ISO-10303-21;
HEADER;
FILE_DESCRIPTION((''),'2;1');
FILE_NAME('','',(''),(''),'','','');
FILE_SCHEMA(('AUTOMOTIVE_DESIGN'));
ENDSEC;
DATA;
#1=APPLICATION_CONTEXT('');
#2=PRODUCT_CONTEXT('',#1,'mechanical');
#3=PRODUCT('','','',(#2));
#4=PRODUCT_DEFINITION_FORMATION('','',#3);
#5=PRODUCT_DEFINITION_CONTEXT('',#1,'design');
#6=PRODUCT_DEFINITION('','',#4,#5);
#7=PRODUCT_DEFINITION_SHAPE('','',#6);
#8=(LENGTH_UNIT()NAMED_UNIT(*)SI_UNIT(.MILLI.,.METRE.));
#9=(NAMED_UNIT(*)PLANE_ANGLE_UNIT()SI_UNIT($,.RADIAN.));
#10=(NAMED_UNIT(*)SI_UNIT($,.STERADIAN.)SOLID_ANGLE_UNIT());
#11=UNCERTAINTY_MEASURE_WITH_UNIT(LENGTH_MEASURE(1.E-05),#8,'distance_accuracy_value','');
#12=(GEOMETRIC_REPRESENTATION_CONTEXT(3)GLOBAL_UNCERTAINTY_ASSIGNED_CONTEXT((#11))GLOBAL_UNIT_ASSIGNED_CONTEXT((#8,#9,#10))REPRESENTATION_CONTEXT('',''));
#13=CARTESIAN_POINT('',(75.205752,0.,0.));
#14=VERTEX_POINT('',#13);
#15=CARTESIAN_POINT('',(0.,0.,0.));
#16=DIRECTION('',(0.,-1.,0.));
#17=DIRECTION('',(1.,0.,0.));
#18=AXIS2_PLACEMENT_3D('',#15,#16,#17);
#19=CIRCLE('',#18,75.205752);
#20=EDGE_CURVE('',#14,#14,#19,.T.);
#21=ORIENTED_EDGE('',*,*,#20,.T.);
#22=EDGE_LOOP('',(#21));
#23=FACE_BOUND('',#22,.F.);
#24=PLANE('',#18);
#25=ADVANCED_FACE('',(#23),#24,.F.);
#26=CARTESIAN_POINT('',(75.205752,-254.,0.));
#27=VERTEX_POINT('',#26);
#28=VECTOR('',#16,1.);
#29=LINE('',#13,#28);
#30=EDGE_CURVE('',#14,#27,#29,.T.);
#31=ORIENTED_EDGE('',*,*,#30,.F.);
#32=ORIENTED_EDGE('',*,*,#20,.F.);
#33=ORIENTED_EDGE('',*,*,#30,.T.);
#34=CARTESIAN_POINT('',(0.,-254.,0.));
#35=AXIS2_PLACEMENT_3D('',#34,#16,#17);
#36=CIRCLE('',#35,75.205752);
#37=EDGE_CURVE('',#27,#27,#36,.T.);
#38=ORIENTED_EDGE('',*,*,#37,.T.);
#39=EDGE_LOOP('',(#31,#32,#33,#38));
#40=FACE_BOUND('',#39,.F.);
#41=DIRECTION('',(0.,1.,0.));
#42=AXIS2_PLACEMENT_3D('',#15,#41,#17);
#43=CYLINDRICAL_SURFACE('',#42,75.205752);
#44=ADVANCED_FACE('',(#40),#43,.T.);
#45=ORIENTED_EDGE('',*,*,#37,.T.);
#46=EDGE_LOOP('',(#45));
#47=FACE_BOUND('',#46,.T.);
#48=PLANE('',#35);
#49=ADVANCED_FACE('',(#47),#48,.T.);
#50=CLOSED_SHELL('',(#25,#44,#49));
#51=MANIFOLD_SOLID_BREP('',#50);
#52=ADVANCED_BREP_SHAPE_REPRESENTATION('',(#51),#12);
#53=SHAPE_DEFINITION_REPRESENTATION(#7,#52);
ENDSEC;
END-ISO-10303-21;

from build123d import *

# Parameters (mm, degrees)
F1_R     = 75.205752061
F2_DEPTH = 254


# Not quite as in the source:
# - the program builds the solid bodies; features that only make, move or delete a surface that nothing else refers to are left out


with BuildPart() as f2:
    # F1 (on face) → F2 (new body)
    with BuildSketch(Plane.XZ):
        Circle(F1_R)
    extrude(amount=F2_DEPTH)


solid = f2.part
